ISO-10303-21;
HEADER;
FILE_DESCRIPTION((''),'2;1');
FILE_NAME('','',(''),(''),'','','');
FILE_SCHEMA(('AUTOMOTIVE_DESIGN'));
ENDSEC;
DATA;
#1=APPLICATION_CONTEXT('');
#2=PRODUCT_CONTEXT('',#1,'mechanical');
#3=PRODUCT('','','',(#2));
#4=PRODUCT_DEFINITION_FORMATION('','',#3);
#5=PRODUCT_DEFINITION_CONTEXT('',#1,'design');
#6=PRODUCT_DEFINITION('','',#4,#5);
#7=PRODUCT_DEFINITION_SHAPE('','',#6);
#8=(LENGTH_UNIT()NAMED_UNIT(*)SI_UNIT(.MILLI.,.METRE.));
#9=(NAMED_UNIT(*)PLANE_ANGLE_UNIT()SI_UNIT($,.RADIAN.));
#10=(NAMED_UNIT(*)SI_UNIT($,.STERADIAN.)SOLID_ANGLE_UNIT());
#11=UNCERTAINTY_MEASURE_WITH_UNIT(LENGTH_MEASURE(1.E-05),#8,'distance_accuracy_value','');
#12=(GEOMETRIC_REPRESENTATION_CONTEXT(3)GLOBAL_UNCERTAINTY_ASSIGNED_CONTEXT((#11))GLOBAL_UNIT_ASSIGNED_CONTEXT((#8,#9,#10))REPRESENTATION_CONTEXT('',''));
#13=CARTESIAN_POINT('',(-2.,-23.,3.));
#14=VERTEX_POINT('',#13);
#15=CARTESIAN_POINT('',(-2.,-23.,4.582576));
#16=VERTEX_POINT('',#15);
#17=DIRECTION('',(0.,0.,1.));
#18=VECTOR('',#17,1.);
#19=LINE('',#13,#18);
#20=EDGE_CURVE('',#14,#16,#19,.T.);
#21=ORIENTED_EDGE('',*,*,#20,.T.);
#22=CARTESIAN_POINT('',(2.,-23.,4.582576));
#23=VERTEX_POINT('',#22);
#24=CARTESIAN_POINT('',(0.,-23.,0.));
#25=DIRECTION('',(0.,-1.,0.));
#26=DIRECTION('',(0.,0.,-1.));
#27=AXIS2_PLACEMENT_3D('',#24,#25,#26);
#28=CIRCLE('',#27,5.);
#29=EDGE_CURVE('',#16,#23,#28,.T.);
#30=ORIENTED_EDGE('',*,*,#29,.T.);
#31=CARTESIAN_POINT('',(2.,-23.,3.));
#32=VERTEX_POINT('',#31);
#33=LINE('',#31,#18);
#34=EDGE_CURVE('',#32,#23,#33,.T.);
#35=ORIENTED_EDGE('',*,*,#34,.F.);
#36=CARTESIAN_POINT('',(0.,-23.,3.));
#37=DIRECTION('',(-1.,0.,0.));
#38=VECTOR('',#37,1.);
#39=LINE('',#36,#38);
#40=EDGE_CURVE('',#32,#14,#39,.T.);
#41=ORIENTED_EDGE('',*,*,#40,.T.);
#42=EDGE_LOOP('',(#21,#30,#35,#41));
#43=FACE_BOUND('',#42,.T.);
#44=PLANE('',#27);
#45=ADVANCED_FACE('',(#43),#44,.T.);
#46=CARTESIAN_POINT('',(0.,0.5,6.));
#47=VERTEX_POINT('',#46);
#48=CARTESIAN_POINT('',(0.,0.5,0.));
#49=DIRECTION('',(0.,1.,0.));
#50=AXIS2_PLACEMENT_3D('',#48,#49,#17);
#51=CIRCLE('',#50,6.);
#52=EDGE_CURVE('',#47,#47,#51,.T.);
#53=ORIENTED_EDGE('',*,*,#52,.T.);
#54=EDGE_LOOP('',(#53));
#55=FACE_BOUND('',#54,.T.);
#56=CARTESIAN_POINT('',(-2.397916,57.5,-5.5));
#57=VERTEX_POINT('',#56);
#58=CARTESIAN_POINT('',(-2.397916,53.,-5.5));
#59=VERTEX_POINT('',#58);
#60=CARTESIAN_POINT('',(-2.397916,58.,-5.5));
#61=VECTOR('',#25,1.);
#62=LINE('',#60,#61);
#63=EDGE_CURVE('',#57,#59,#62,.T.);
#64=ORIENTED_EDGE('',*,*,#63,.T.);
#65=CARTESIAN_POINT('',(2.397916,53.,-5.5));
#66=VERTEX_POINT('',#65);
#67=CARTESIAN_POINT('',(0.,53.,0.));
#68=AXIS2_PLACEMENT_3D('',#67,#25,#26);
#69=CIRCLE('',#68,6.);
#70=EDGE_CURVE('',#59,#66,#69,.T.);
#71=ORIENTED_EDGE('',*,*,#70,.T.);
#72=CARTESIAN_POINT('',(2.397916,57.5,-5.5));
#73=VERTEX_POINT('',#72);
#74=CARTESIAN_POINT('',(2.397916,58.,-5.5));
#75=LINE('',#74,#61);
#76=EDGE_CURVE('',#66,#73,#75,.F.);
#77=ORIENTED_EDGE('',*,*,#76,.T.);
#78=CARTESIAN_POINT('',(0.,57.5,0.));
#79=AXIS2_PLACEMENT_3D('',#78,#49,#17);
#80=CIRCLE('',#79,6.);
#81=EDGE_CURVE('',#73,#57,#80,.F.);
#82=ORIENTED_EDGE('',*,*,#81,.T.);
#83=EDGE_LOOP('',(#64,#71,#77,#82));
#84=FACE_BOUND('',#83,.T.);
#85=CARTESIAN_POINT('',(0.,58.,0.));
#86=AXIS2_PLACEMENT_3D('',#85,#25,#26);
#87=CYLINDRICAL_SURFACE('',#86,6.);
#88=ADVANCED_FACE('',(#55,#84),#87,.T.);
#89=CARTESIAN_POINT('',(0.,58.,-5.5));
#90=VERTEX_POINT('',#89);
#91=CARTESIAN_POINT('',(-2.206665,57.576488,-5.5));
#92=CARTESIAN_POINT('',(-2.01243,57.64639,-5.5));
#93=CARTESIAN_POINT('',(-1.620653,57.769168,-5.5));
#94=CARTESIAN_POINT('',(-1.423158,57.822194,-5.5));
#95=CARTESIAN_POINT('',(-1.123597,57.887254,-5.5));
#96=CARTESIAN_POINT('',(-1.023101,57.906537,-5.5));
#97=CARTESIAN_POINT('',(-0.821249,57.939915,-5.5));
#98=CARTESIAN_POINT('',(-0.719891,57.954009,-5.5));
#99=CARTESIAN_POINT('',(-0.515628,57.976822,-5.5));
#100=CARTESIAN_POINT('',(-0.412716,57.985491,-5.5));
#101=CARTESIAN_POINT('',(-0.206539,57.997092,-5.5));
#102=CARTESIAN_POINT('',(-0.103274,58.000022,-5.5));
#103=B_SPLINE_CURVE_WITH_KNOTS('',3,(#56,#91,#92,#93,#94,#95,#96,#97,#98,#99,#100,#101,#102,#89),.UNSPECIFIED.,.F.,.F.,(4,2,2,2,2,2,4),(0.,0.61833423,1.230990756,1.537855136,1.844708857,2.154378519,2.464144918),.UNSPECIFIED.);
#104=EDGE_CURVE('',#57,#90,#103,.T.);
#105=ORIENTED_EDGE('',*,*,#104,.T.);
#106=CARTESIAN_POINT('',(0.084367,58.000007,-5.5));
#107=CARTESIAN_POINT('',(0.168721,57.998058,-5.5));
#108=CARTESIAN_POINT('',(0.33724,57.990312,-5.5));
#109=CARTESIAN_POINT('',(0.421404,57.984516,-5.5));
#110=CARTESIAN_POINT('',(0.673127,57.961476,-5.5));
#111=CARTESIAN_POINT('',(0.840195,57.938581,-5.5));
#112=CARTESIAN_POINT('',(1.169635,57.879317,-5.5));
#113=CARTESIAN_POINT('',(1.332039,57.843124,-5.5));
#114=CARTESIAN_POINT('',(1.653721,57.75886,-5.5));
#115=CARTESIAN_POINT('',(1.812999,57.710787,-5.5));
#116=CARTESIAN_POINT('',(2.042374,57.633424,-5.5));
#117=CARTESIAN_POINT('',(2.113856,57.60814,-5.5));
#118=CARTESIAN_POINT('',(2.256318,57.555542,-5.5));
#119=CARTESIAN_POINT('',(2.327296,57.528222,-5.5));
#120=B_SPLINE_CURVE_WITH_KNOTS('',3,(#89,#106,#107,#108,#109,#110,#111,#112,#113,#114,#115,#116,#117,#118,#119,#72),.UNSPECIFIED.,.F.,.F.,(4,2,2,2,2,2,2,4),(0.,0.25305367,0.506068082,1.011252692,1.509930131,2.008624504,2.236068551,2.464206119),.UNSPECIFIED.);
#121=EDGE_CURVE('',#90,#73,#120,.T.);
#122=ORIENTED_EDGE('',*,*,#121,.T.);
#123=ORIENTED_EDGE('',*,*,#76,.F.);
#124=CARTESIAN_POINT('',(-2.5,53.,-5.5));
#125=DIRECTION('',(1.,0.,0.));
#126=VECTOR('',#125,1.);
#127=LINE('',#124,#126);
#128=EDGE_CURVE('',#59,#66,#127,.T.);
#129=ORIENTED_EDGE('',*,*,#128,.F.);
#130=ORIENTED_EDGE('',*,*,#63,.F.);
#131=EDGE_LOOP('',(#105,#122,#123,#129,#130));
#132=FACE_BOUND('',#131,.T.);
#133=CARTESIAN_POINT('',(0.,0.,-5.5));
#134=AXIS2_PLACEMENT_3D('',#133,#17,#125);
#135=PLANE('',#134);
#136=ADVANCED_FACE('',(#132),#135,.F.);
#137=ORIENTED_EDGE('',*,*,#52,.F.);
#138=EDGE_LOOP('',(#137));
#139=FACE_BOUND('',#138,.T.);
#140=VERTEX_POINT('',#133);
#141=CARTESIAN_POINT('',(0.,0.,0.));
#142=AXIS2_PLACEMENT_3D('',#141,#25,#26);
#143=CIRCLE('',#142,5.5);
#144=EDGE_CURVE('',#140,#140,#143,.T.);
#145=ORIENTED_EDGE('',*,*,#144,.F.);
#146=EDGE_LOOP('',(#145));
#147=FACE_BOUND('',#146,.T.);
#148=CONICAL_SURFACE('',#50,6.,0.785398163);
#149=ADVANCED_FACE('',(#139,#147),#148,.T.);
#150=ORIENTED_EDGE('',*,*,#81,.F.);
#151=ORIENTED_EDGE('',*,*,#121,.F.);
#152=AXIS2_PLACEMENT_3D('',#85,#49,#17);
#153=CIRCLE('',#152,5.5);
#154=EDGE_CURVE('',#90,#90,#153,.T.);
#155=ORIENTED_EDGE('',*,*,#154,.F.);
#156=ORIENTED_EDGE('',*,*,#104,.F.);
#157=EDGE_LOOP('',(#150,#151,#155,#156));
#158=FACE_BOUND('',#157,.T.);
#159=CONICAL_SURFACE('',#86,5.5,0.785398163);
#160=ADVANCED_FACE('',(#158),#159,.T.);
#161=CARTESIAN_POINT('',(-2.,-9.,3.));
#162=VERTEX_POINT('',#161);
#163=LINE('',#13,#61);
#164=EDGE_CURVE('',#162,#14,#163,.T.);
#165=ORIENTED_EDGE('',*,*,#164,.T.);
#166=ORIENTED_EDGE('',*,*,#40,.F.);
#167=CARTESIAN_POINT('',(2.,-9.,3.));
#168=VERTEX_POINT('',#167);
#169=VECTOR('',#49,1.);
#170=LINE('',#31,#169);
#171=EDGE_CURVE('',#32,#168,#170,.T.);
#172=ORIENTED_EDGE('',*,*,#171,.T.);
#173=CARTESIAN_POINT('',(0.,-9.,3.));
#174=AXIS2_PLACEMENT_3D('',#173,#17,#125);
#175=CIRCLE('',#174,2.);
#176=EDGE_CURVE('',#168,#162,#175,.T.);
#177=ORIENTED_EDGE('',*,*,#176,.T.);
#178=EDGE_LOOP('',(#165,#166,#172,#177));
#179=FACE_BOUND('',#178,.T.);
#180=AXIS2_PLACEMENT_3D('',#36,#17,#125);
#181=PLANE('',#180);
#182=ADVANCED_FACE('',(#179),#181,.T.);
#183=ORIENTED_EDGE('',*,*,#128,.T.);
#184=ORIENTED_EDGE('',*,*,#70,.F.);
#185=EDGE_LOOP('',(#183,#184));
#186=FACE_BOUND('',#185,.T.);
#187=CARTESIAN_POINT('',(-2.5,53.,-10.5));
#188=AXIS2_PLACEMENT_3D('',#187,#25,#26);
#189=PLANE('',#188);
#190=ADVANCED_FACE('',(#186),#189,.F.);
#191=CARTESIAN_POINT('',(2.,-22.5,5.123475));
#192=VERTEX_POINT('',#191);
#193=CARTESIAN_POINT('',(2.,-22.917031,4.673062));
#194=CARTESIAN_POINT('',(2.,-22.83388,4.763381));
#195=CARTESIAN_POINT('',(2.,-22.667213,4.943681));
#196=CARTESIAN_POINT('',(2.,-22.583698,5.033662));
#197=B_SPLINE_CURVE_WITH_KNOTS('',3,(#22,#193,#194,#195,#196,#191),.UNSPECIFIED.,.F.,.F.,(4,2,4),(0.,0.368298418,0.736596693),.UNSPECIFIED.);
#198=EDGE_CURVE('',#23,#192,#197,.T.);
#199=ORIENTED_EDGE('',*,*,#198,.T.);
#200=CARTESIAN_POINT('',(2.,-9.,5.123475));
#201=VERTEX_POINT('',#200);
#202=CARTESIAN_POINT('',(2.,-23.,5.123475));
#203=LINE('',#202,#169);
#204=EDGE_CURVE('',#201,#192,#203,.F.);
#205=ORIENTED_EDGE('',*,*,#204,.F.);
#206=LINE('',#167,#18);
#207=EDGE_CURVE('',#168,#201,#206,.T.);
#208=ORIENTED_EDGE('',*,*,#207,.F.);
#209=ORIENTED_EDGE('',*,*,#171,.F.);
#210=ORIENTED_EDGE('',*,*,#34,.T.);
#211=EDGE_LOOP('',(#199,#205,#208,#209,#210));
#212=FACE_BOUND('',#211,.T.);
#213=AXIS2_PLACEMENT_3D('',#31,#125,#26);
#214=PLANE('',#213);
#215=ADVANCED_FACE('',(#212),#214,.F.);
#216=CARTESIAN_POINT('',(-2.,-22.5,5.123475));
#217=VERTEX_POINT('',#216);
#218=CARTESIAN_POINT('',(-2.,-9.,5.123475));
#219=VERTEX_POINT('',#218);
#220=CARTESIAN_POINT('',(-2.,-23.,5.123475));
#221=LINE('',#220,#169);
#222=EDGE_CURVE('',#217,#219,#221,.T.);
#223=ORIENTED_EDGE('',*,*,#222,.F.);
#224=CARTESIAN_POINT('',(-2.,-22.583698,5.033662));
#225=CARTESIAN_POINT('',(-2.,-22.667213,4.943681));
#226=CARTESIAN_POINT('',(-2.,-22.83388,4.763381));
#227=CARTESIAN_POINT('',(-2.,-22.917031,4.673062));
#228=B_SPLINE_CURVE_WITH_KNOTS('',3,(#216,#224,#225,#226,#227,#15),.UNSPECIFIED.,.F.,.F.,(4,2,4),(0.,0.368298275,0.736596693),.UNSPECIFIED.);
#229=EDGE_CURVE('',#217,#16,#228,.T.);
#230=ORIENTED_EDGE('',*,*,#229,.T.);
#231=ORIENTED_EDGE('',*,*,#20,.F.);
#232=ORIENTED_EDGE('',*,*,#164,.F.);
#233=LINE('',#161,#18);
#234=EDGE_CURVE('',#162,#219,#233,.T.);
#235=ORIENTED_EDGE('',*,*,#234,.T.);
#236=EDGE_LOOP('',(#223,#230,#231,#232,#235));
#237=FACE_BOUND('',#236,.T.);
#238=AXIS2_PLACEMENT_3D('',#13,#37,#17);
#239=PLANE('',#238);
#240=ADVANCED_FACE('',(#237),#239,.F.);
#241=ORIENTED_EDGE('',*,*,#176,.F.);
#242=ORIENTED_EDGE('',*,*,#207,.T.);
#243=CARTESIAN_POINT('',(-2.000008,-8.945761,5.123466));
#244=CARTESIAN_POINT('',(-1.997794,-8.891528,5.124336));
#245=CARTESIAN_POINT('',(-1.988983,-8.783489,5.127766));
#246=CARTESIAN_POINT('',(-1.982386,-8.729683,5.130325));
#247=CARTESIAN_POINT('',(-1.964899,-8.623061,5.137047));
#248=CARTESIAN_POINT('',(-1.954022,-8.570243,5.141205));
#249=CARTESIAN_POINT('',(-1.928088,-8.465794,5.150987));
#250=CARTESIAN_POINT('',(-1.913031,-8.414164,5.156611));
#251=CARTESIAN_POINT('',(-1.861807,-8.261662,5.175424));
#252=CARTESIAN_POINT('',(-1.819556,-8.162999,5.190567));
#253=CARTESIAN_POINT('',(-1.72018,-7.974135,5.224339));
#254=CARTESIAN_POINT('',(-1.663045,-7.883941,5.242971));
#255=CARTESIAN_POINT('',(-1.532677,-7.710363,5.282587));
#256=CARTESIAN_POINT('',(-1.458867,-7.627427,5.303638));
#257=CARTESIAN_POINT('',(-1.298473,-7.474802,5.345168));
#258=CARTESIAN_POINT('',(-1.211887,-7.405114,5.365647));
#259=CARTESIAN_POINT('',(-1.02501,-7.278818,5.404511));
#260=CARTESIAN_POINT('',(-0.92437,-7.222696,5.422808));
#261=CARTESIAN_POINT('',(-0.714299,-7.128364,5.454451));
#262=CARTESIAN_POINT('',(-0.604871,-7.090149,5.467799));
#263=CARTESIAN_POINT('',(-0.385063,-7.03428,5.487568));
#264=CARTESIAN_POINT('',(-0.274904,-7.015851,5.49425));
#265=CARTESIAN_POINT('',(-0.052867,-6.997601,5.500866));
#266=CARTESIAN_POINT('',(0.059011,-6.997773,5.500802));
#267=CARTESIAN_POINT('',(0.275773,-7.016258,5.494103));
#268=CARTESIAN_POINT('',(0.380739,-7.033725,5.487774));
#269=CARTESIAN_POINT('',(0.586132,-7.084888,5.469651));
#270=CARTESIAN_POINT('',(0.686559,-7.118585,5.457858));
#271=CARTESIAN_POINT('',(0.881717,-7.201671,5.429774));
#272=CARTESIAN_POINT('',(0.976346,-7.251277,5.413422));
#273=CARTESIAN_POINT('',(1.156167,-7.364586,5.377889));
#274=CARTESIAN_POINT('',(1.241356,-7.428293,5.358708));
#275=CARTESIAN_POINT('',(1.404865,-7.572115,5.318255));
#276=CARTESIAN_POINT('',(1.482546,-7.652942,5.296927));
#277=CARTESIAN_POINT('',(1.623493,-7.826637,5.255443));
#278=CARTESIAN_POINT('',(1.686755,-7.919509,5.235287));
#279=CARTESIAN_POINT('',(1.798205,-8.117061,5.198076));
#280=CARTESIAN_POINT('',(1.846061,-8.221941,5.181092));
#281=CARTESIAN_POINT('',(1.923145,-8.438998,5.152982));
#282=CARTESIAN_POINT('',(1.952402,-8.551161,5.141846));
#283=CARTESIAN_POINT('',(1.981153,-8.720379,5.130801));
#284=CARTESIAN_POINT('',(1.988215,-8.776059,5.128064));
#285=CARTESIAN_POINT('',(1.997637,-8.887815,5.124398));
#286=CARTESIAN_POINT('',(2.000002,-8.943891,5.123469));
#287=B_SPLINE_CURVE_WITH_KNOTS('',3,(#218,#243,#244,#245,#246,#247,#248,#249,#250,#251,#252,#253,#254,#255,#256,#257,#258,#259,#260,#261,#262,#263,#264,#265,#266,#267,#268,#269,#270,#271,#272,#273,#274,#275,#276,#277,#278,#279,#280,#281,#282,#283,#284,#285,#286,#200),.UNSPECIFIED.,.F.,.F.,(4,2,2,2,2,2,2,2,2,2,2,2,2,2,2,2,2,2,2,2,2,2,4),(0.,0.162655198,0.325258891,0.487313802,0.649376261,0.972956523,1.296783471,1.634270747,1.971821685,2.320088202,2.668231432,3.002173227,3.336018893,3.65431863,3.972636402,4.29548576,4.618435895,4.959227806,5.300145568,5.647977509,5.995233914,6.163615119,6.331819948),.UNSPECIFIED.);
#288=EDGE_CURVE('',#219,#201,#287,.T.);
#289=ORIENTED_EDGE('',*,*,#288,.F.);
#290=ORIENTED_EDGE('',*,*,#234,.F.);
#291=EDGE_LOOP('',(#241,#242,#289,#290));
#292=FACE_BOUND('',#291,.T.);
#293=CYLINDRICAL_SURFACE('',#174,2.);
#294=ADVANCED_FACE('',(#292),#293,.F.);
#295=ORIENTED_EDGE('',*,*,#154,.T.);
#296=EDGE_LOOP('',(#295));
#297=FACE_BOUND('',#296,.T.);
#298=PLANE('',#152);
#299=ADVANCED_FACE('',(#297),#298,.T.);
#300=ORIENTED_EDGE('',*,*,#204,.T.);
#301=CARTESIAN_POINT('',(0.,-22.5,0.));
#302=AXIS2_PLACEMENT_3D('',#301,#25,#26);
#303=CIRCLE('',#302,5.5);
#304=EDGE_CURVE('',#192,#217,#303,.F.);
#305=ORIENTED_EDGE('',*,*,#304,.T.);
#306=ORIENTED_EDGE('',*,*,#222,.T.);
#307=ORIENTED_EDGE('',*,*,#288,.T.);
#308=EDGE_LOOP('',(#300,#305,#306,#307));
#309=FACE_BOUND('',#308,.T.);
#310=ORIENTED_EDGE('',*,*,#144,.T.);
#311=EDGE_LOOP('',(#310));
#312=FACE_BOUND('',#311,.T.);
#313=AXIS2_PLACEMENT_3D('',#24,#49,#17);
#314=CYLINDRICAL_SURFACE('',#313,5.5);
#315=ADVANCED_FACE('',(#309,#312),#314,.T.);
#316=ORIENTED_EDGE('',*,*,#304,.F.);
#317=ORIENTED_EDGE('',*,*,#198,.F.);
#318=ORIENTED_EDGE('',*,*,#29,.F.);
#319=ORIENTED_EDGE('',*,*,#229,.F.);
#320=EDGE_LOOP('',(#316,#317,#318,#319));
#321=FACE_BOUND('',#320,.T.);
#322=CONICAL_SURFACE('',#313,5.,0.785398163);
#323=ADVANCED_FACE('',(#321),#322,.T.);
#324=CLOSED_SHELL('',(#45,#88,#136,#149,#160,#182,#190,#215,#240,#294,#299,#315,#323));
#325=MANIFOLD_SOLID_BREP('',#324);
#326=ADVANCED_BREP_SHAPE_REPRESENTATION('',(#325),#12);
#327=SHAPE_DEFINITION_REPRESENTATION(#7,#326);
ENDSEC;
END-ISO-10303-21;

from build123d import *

# Parameters (mm, degrees)
SCHIZZO1_R                   = 6
ESTRUSIONE_ESTRUSIONE1_DEPTH = 58
SCHIZZO2_R                   = 5.5
ESTRUSIONE_ESTRUSIONE2_DEPTH = 23
TAGLIO_ESTRUSIONE1_START     = -5.5
SCHIZZO3_W                   = 5
SCHIZZO3_H                   = 5
TAGLIO_ESTRUSIONE1_DEPTH     = 5
TAGLIO_ESTRUSIONE2_DEPTH     = 2.5
SMUSSO1_SIZE                 = 0.5


with BuildPart() as part:
    # Schizzo1 → Estrusione-Estrusione1 (new body)
    with BuildSketch(Plane(origin=(0, 0, 0), x_dir=(1, 0, 0), z_dir=(0, 1, 0))):
        with Locations(Location((0, 0, 0), (0, 0, 90))):
            Circle(SCHIZZO1_R)
    extrude(amount=ESTRUSIONE_ESTRUSIONE1_DEPTH)

    # Schizzo2 → Estrusione-Estrusione2 (add)
    with BuildSketch(Plane.XZ):
        with Locations(Location((0, 0, 0), (0, 0, 270))):
            Circle(SCHIZZO2_R)
    extrude(amount=ESTRUSIONE_ESTRUSIONE2_DEPTH)

    # Schizzo3 → Taglio-Estrusione1 (cut)
    with BuildSketch(Plane.XY.offset(TAGLIO_ESTRUSIONE1_START)):
        with Locations((0, 55.5)):
            Rectangle(SCHIZZO3_W, SCHIZZO3_H)
    extrude(amount=-TAGLIO_ESTRUSIONE1_DEPTH, mode=Mode.SUBTRACT)

    # Schizzo5 → Taglio-Estrusione2 (cut)
    with BuildSketch(Plane.XY.offset(5.5)):
        with BuildLine():
            Line((-2, -23), (-2, -9))
            ThreePointArc((-2, -9), (0, -7), (2, -9))
            Line((2, -9), (2, -23))
            ThreePointArc((2, -23), (0, -25), (-2, -23))
        make_face()
    extrude(amount=-TAGLIO_ESTRUSIONE2_DEPTH, mode=Mode.SUBTRACT)

    # Smusso1
    smusso1_edges = [part.edges().sort_by_distance(p)[0] for p in [
        (0, 0, 6),
        (0, 58, 6),
        (5.405049242, -23, -1.017567048),
    ]]
    chamfer(smusso1_edges, length=SMUSSO1_SIZE - 0.0001)  # a hair under: the kernel refuses the full size


solid = part.part
